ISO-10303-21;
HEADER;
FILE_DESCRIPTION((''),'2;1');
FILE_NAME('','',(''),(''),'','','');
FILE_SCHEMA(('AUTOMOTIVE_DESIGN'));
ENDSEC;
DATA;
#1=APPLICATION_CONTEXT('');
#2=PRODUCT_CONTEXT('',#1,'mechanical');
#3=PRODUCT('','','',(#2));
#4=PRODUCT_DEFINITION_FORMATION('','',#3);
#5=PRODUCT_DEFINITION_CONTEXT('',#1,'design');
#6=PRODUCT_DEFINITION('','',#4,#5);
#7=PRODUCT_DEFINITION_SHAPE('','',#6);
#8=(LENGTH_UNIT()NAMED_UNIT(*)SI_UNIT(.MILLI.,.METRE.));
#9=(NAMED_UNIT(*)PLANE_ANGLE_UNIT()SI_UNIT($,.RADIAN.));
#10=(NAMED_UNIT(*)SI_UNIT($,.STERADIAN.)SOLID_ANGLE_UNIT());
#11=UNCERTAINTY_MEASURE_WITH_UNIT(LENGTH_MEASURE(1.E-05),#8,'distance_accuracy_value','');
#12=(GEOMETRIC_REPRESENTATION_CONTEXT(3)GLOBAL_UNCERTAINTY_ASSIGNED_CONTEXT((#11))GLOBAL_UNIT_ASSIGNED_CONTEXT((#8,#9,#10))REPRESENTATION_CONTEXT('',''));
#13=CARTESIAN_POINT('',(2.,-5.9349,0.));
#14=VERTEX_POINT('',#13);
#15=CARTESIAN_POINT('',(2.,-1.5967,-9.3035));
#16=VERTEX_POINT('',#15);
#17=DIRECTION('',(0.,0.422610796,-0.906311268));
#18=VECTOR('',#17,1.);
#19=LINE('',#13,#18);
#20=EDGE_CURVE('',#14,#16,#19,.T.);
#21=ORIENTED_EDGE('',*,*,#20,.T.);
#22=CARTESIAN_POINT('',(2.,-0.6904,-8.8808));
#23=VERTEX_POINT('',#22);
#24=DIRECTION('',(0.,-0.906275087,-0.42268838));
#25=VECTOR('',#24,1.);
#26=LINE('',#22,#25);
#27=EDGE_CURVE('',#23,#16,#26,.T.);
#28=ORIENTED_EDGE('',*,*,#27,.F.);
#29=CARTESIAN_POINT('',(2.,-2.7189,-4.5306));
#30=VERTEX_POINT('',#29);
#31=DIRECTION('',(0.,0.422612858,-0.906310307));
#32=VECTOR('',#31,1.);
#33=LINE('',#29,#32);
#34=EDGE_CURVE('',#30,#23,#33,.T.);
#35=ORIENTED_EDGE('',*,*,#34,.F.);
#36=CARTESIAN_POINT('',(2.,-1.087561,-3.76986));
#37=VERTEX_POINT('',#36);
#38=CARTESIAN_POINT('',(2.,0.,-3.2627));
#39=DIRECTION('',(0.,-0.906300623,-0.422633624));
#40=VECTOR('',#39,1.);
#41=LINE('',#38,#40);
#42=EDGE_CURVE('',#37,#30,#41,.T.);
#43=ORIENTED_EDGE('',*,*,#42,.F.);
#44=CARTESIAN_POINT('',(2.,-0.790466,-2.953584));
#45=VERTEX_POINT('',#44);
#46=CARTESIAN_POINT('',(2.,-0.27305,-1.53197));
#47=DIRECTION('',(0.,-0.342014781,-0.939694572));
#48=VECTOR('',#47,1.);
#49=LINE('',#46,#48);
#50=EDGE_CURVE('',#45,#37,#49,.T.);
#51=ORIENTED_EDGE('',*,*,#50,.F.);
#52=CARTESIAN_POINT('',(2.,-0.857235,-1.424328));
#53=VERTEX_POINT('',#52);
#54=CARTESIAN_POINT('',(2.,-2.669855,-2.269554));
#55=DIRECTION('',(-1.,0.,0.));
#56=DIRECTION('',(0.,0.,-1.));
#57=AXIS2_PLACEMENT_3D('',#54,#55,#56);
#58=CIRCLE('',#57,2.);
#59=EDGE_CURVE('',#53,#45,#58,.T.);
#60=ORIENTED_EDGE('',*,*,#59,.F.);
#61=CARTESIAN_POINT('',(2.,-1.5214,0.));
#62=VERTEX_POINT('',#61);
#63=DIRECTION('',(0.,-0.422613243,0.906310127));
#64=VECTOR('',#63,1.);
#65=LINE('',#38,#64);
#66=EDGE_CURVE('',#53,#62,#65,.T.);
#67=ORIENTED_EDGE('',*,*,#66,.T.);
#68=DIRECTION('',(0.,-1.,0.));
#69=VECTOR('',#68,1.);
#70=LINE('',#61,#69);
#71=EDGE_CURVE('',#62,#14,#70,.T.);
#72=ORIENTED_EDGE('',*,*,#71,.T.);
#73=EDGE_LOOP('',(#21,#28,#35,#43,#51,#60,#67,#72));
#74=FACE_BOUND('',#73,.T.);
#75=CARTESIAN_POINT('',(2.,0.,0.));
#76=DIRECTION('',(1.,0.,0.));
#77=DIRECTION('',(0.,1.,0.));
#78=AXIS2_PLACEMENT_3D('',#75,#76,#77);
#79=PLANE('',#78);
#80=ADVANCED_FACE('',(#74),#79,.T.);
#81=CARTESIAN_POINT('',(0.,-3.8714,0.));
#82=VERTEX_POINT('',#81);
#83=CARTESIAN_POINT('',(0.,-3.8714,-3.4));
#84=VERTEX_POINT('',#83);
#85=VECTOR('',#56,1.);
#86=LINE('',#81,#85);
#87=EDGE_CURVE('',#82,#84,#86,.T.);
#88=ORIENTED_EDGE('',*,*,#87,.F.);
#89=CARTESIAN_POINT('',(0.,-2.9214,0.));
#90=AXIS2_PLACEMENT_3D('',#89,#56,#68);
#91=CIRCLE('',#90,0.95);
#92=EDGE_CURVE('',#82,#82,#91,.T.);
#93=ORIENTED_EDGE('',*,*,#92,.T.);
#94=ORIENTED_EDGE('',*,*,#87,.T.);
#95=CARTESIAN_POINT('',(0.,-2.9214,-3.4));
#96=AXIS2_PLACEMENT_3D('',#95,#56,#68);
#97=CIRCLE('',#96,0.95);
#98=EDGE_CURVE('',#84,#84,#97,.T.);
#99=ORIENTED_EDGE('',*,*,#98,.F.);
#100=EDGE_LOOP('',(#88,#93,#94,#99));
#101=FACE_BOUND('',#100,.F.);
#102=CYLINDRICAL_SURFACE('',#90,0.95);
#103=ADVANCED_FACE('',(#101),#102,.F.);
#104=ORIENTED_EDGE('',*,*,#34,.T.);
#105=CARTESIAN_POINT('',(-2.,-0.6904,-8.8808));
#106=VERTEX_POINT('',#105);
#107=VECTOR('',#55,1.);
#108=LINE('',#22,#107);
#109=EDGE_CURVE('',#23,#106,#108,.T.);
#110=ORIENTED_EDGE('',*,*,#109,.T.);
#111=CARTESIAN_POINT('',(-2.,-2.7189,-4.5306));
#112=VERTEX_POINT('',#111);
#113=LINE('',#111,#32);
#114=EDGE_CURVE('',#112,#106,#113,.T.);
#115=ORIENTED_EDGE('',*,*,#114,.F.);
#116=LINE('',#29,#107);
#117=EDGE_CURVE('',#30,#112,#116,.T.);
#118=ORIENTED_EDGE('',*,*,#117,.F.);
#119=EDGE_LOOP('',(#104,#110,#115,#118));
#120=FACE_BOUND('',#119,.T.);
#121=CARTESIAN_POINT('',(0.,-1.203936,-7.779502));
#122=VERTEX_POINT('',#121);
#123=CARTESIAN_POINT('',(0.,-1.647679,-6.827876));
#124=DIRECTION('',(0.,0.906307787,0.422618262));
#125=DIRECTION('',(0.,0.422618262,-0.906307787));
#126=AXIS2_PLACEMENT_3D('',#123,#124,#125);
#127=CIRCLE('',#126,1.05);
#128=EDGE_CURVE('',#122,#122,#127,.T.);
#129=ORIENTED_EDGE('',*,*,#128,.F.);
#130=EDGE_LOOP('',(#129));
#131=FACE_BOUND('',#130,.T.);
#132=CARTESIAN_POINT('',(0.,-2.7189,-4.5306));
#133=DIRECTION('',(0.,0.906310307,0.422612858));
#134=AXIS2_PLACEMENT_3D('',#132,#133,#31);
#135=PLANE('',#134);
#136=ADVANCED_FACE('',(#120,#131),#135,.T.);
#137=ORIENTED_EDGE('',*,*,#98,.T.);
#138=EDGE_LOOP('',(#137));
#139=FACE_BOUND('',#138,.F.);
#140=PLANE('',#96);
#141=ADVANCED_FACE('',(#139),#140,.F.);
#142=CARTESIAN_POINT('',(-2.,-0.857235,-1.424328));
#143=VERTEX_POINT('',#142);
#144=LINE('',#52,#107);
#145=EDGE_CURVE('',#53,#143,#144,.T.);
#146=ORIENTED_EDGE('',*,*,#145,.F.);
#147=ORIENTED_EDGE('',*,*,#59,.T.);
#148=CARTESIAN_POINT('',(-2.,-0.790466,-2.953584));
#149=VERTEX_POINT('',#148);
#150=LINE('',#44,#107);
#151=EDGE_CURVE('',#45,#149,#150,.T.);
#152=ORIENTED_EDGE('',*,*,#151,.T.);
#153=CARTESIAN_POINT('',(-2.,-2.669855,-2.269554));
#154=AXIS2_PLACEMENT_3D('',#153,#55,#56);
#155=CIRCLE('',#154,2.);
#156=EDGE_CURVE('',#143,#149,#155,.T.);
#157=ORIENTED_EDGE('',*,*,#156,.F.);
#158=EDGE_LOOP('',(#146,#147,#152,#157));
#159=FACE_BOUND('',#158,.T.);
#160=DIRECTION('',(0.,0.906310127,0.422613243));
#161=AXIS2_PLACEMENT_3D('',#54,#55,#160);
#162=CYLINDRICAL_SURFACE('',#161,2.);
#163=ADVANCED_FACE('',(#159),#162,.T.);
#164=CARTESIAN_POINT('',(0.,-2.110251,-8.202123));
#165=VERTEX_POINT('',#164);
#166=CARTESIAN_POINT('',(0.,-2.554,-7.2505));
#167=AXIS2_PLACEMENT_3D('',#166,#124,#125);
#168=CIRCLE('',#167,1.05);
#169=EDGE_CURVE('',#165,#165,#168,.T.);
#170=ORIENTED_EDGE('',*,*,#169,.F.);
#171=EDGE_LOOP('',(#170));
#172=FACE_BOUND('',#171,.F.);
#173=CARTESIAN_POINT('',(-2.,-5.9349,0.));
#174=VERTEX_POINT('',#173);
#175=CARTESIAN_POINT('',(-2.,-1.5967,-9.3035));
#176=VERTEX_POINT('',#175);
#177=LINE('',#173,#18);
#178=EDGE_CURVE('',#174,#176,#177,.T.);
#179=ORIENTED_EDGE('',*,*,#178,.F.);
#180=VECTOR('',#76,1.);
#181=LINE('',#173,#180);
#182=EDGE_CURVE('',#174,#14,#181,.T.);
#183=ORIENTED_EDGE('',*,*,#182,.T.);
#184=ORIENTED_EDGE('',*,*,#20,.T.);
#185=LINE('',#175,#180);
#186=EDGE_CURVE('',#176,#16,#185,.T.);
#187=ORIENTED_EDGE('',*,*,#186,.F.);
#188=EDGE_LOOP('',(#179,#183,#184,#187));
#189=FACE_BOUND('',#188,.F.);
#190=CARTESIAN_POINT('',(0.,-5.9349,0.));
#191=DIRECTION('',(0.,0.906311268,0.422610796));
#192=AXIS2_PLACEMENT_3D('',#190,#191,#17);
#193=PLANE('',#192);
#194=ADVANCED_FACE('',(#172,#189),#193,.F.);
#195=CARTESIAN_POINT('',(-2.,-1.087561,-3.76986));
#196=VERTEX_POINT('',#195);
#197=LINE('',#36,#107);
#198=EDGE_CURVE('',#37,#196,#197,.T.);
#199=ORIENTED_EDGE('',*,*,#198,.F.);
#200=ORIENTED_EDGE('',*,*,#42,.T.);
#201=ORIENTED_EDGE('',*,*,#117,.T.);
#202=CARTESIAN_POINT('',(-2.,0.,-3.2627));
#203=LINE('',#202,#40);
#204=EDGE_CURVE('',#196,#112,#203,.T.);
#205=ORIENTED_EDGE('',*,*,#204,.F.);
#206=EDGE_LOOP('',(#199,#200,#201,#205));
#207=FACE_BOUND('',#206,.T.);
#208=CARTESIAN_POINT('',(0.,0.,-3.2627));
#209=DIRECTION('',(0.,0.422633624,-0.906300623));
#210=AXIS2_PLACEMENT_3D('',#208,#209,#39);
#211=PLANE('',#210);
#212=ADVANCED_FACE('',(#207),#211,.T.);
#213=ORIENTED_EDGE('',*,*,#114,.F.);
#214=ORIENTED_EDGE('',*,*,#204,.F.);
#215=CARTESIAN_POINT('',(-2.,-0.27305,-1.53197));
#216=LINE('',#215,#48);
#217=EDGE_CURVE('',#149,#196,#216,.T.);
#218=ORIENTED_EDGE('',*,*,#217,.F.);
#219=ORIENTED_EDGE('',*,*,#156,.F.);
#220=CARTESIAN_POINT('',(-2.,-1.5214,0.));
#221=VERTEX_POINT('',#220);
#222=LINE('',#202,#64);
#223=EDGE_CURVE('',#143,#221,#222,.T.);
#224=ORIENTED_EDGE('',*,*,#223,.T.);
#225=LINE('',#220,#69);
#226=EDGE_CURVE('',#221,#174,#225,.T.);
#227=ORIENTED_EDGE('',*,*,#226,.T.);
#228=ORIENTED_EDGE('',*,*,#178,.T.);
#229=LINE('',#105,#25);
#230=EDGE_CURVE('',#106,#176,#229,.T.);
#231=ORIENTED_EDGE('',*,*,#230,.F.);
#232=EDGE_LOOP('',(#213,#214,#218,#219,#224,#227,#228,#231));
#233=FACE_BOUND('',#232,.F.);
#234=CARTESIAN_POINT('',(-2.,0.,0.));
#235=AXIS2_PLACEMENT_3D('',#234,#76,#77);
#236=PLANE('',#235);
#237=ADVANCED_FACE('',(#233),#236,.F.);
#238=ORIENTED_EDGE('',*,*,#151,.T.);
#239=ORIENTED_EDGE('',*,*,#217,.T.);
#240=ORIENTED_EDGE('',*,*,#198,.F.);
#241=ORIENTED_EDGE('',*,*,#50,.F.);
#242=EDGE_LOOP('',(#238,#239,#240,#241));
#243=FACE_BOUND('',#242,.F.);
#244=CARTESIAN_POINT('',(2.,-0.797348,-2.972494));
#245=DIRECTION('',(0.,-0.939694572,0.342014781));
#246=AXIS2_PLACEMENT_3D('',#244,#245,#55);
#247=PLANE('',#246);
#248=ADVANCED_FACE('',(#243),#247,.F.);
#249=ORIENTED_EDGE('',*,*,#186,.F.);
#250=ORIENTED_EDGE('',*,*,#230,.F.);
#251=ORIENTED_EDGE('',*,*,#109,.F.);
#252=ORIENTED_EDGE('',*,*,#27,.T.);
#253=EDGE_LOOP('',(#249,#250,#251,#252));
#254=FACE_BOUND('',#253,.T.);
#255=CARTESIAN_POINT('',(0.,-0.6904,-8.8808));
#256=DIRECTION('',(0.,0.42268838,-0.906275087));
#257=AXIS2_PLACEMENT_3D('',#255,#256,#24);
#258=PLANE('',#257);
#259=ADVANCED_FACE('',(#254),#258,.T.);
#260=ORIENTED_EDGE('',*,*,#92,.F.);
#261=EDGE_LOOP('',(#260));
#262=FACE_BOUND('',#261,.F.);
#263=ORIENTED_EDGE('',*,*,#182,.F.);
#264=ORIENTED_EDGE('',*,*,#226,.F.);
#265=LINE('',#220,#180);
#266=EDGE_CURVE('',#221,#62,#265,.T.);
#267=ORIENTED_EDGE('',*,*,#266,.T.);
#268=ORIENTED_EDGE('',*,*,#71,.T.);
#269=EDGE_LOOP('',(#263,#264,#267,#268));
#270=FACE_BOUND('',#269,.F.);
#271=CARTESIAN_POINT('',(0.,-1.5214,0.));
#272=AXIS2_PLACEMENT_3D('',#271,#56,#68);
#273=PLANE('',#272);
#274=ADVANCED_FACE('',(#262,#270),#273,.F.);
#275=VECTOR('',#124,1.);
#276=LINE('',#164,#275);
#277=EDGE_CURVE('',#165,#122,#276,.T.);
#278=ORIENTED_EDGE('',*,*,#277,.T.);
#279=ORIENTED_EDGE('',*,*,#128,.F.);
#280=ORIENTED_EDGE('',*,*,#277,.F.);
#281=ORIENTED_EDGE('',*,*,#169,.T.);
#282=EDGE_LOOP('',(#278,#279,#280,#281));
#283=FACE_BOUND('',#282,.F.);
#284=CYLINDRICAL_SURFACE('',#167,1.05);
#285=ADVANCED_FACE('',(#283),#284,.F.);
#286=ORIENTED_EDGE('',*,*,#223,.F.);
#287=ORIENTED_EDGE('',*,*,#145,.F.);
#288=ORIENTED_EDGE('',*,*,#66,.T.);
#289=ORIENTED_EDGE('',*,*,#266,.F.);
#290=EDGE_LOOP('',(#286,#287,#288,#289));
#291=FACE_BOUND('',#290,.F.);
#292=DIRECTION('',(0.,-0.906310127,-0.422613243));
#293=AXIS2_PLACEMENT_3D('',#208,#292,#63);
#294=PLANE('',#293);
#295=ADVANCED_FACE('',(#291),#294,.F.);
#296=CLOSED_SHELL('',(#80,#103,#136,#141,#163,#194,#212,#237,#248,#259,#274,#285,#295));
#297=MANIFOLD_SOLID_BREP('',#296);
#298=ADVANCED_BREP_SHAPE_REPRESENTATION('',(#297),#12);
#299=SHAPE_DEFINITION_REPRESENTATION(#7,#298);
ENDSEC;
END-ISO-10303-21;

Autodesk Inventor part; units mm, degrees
ref_plane "YZ Plane" through (0, 0, 0) normal (1, 0, 0) x (0, 1, 0)
ref_plane "XZ Plane" through (0, 0, 0) normal (0, 1, 0) x (-1, 0, 0)
ref_plane "XY Plane" through (0, 0, 0) normal (0, 0, 1) x (1, 0, 0)
sketch "Skizze1" plane through (0, 0, 0) normal (1, 0, 0) x (0, 1, 0)
  line L0 (-1.5214, 0) -> (-5.9349, 0)
  line L1 (-5.9349, 0) -> (-1.5967, -9.3035)
  line L2 (0, -3.2627) -> (-1.5214, 0)
  line L3 (0, -3.2627) -> (-2.7189, -4.5306)
  line L4 (-2.7189, -4.5306) -> (-0.6904, -8.8808)
  line L5 (-0.6904, -8.8808) -> (-1.5967, -9.3035)
  line L6 (0, 1.8607) -> (0, -11.1642) projected
  point P0 (0, 0)
  dimension "d0" = 65
  dimension "d32" = 1
  dimension "d33" = 3
  dimension "d35" = 3.6
  dimension "d36" = 8.4
extrude "Extrusion1" add sketch "Skizze1" along normal mid plane 4
sketch "Skizze2" plane through (-2, -5.9349, 0) normal (0, 0, 1) x (1, 0, 0)
  line L0 (0, 0) -> (4, 0) projected
  line L1 (4, 4.4135) -> (4, 0) projected
  line L2 (4, 4.4135) -> (0, 4.4135) projected
  line L3 (0, 0) -> (0, 4.4135) projected
  line L4 (0, 4.3383) -> (0, 0) construction
  point P0 (2, 5.9349)
  point P1 (0, 4.7343)
  point P2 (2, 3.0135)
  dimension "d5" = 2
  dimension "d25" = 1.4
hole "Bohrung1" at (0, -2.9214, 0) direction (0, 0, -1) diameter 1.9 depth 3.4
sketch "Skizze3" plane through (-2, -1.8641, -8.7299) normal (0, -0.9063078, -0.4226183) x (1, 0, 0)
  line L0 (4, 9.6324) -> (4, -0.6329) projected
  line L1 (0, 9.6324) -> (4, 9.6324) projected
  line L2 (0, -0.6329) -> (0, 9.6324) projected
  line L3 (0, -0.6329) -> (4, -0.6329) projected
  point P0 (2, 1.6324)
  dimension "d26" = 2
  dimension "d29" = 8
hole "Bohrung2" at (0, -2.554, -7.2505) direction (0, 0.9063078, 0.4226183) diameter 2.1 end through all
chamfer "Fase1" distance 1.2 angle 45 1 edges at (0, 0, -3.2627)
fillet "Rundung1" radius 2 1 edges at (0, -0.5071, -2.1751)
properties part number "Ballsensor Platinenwinkel" material "PC/ABS-Kunststoff"
